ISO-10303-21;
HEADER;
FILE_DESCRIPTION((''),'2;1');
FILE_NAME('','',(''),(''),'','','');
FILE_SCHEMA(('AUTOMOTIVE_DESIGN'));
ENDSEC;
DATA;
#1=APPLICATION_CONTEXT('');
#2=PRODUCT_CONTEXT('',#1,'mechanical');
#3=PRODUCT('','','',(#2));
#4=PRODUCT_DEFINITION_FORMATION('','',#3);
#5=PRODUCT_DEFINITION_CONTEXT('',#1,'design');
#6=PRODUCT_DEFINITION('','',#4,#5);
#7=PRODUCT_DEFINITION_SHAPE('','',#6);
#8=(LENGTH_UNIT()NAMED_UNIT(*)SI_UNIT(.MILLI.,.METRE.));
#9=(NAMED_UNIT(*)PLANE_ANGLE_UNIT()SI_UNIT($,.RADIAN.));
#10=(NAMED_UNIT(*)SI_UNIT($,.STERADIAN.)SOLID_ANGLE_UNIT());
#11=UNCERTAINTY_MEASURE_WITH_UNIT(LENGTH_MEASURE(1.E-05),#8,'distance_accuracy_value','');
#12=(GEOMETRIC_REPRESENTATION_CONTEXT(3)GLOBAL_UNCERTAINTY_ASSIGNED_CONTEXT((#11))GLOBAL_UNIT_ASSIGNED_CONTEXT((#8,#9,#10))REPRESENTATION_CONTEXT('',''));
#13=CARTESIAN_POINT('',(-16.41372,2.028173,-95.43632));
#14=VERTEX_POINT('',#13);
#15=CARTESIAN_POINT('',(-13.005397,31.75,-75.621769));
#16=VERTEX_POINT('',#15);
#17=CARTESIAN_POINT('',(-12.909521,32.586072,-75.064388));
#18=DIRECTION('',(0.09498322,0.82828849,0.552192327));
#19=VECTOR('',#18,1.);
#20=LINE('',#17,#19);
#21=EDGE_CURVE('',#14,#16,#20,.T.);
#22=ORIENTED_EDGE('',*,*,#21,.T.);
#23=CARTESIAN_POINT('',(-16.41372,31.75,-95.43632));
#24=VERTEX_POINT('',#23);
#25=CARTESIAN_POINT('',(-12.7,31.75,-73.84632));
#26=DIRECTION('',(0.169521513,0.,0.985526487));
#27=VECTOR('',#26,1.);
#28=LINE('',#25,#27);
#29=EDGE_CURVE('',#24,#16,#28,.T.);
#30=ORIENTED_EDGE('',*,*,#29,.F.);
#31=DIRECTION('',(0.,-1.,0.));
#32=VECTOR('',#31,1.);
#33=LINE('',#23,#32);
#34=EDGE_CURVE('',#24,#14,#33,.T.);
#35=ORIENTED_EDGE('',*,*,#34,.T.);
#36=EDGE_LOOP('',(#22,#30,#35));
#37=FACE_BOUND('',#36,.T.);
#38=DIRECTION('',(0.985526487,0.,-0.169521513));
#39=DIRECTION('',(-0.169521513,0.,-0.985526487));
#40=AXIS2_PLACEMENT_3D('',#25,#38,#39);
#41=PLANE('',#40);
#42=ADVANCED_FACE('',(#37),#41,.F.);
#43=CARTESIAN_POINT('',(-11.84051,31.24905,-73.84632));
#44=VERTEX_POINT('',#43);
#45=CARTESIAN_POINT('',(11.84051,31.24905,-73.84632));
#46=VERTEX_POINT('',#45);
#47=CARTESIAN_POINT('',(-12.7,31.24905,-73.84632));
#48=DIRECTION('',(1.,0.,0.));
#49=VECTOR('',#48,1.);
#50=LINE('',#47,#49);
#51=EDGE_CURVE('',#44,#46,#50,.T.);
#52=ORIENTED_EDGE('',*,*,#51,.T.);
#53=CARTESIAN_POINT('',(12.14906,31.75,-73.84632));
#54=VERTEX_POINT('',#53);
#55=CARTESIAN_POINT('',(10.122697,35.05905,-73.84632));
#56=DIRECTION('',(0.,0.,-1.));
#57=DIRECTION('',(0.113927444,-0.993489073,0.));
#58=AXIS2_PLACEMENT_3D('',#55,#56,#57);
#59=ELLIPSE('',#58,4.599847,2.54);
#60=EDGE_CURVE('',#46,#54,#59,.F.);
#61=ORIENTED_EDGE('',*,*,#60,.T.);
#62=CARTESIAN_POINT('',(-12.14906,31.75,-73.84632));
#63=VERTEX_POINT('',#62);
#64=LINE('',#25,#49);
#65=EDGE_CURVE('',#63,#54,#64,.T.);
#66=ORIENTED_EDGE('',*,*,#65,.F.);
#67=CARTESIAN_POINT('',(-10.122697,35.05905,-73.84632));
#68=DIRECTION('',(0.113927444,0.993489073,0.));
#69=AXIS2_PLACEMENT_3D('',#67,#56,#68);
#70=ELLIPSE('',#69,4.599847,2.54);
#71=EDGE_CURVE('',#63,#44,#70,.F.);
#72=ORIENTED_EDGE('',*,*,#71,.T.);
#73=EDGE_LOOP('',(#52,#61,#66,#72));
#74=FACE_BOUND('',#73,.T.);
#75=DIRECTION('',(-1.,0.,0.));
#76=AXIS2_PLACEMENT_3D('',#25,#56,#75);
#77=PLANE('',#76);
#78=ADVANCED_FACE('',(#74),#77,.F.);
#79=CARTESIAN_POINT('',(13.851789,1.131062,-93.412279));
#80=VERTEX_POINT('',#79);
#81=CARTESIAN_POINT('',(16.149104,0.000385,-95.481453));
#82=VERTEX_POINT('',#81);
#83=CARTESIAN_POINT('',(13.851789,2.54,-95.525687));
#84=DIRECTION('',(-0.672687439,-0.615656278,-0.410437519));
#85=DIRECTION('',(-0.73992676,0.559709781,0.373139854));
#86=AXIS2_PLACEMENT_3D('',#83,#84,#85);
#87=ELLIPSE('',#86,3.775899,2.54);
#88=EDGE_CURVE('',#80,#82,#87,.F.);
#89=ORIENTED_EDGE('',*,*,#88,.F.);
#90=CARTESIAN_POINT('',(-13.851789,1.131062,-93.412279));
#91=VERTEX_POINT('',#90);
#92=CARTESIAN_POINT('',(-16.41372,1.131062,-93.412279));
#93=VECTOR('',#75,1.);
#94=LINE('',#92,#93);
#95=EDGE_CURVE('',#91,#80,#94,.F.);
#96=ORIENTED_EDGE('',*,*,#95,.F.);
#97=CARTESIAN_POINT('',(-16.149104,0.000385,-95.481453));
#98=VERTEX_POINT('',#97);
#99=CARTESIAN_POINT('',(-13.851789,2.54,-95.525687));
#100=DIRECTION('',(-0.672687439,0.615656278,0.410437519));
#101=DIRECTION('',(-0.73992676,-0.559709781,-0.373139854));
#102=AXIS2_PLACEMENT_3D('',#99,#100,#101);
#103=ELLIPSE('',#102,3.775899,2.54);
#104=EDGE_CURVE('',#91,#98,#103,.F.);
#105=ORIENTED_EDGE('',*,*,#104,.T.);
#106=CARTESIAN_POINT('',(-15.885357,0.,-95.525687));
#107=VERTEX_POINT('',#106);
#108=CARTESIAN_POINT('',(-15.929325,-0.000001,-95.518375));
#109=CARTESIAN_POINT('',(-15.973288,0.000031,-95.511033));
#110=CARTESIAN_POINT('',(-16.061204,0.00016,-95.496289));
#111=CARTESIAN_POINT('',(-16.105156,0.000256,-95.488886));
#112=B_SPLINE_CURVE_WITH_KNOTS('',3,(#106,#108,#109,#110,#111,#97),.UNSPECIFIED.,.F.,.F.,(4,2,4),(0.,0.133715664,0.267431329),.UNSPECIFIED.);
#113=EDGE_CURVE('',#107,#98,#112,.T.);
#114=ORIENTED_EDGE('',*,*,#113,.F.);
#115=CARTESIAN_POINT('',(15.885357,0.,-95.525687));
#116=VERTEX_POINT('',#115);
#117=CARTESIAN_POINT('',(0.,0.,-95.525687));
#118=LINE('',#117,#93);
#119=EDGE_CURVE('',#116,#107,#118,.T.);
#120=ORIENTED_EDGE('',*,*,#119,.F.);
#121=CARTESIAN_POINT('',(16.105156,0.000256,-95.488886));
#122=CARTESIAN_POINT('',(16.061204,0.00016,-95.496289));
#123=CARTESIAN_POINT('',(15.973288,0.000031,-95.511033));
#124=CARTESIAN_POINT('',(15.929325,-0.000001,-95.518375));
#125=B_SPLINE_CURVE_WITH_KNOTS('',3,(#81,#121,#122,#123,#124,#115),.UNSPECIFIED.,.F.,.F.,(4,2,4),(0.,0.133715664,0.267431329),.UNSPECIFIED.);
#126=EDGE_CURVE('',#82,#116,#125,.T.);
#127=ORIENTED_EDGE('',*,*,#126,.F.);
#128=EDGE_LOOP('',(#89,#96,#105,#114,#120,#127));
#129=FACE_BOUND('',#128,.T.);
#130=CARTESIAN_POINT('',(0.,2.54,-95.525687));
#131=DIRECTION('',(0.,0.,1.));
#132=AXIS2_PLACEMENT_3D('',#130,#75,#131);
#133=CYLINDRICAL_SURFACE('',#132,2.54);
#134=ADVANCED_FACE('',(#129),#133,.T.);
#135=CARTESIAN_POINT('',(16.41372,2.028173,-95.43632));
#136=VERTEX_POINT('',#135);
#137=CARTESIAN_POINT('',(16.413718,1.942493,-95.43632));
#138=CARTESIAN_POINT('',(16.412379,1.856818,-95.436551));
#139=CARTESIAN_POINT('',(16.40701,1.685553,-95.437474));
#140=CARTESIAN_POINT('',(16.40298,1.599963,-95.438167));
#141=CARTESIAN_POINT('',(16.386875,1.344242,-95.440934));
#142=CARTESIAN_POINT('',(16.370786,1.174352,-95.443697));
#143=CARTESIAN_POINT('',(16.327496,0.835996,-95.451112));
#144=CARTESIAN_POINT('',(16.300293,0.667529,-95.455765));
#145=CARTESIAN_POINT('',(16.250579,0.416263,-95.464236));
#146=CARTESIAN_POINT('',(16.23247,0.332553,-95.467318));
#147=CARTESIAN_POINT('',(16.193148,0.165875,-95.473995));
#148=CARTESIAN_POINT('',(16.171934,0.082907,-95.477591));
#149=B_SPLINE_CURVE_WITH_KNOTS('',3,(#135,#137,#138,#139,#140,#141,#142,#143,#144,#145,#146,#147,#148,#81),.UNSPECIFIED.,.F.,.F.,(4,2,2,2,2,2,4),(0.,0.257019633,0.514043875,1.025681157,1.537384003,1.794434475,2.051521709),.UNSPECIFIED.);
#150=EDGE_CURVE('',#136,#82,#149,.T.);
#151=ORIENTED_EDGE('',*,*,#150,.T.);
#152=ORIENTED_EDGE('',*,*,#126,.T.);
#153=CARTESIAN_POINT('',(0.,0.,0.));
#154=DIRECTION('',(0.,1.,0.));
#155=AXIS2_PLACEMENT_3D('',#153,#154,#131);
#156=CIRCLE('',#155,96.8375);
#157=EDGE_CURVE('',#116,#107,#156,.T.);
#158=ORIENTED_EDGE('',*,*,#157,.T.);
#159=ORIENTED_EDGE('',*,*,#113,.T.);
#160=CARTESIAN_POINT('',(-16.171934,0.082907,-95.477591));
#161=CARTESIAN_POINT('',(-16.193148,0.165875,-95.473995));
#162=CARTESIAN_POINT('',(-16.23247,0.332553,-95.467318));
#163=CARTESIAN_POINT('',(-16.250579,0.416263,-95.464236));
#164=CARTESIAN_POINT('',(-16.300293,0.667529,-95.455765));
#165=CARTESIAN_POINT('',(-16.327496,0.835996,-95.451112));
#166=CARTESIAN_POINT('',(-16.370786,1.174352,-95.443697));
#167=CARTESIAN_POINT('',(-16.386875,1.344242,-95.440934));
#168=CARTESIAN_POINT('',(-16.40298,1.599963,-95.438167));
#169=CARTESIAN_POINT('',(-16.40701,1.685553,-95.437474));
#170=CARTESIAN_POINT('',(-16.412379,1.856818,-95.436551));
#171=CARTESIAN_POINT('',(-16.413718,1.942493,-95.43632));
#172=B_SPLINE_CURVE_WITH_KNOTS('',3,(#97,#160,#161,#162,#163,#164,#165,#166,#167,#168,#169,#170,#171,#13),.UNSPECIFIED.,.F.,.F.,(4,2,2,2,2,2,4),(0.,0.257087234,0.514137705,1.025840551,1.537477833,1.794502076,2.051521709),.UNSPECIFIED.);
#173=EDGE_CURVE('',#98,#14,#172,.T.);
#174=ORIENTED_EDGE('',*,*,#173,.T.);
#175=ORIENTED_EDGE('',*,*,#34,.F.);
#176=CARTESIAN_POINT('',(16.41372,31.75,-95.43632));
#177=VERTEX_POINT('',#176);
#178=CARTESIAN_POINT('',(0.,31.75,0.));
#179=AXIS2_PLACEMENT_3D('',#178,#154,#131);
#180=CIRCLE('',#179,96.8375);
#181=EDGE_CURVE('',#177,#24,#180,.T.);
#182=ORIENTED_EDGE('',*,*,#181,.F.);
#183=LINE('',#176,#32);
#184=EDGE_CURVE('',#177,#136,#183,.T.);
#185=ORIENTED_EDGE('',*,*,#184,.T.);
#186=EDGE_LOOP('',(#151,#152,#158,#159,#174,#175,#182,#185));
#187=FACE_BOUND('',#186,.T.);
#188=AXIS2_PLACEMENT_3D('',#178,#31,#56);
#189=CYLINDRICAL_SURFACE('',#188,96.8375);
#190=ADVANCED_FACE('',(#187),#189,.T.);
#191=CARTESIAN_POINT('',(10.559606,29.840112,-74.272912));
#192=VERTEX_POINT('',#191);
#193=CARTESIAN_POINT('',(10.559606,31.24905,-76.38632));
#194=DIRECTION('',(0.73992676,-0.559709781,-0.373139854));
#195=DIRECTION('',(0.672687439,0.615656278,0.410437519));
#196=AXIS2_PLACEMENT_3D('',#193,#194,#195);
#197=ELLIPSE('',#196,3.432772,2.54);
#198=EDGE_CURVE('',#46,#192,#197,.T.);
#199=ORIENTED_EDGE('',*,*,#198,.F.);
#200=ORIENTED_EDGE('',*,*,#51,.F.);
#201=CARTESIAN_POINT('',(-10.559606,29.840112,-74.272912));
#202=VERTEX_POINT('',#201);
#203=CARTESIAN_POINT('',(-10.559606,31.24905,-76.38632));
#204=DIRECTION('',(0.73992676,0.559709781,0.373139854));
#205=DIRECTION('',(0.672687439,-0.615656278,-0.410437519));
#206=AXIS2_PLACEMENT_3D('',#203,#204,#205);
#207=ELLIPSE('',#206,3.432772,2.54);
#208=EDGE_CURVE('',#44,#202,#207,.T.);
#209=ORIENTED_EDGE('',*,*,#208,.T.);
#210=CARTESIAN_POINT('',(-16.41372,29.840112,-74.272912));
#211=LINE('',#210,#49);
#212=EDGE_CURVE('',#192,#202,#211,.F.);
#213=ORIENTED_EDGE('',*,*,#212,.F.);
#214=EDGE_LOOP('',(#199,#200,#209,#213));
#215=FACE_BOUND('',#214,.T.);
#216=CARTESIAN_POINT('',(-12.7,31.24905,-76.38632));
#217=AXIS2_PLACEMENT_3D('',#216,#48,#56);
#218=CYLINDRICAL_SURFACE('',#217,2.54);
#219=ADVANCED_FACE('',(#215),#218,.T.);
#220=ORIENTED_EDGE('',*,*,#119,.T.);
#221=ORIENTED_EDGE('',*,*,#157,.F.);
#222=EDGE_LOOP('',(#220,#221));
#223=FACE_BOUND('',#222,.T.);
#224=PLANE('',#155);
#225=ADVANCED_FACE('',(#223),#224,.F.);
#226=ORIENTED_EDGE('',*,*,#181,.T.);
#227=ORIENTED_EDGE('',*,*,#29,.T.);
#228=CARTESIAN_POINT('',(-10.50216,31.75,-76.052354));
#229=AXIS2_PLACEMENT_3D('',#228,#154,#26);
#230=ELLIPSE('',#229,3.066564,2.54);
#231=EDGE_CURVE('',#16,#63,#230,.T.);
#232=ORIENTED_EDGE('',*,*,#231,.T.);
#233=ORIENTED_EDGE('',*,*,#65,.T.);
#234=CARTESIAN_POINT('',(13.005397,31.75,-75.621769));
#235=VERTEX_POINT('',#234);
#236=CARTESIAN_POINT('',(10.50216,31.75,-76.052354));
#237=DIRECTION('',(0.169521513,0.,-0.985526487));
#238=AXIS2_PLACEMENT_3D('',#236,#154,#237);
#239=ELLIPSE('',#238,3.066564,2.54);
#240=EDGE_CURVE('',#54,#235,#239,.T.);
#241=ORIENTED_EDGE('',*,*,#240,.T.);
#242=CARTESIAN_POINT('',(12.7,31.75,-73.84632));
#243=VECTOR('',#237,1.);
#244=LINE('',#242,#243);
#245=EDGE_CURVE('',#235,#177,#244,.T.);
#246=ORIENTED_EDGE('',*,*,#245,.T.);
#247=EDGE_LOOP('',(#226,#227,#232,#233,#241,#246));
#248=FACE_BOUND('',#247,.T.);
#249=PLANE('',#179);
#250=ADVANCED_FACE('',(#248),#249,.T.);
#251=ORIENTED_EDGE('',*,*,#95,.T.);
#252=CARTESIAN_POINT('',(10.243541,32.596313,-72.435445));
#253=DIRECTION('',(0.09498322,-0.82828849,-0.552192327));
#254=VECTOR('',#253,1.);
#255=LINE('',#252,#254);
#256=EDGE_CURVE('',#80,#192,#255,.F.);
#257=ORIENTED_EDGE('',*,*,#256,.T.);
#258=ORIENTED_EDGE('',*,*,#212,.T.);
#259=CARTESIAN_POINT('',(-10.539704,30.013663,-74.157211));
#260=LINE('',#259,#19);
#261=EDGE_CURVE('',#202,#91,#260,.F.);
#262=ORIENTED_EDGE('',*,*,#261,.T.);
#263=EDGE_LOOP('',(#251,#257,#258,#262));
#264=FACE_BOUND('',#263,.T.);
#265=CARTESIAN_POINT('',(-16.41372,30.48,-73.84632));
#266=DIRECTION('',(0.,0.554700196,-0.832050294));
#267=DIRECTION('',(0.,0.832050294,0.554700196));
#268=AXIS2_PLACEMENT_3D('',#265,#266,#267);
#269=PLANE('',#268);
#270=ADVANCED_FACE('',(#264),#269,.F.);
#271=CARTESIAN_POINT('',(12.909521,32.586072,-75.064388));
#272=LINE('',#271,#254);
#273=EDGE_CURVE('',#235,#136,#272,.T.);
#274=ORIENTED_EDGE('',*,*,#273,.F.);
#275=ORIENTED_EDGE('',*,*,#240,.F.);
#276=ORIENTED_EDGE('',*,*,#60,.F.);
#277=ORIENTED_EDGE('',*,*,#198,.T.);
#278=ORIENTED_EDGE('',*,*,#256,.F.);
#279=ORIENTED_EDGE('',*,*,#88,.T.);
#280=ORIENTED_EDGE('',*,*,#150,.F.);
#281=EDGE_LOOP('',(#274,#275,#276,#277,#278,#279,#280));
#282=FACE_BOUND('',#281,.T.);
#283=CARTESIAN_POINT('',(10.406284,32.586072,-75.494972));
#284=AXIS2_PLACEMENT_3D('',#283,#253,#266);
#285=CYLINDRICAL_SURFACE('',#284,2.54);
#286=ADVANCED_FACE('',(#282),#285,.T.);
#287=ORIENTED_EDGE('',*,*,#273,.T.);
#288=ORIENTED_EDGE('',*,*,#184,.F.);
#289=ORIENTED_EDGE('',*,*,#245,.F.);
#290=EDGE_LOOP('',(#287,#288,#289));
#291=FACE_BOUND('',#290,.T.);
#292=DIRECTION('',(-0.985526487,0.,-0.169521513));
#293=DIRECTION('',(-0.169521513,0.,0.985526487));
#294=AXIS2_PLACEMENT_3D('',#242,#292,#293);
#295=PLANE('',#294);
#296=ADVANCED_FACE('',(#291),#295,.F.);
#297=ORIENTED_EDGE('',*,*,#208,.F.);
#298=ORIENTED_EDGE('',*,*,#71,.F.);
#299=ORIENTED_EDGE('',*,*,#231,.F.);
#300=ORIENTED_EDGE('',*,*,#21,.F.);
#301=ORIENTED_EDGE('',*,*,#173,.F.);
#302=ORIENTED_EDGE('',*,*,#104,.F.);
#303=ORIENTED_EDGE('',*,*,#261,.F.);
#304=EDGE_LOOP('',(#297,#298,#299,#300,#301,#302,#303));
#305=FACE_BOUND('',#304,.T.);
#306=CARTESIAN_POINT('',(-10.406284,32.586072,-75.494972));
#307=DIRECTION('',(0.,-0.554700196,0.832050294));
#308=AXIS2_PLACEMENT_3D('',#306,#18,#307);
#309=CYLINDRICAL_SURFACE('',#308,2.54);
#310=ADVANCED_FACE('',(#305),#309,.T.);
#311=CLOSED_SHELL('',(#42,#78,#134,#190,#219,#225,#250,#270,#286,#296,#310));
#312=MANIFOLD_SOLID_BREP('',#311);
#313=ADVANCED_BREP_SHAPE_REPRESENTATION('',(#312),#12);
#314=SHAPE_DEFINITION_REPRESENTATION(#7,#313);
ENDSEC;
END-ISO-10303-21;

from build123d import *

# Parameters (mm, degrees)
BOSS_EXTRUDE1_DEPTH     = 31.75
CUT_EXTRUDE1_DEPTH      = 104.222934041
CUT_EXTRUDE1_DEPTH_BACK = 104.222934041
FILLET1_R               = 2.54


with BuildPart() as part:
    # Sketch1 → Boss-Extrude1 (new body)
    with BuildSketch(Plane(origin=(0, 0, 0), x_dir=(1, 0, 0), z_dir=(0, 1, 0))):
        with BuildLine():
            Line((-12.7, 73.846320133), (12.7, 73.846320133))
            Line((12.7, 73.846320133), (16.413720047, 95.436320133))
            ThreePointArc((16.413720047, 95.436320133), (0, 96.8375), (-16.413720047, 95.436320133))
            Line((-16.413720047, 95.436320133), (-12.7, 73.846320133))
        make_face()
    extrude(amount=BOSS_EXTRUDE1_DEPTH)

    # Sketch2 → Cut-Extrude1 (cut, two sides: drawn at the far end of the back side and taken through both)
    with BuildSketch(Plane(origin=(0, 0, 0), x_dir=(0, 0, -1), z_dir=(1, 0, 0)).offset(-CUT_EXTRUDE1_DEPTH_BACK)):
        Polygon((73.846320133, 30.48), (94.166320133, 0), (73.846320133, 0), align=None)
    extrude(amount=CUT_EXTRUDE1_DEPTH + CUT_EXTRUDE1_DEPTH_BACK, mode=Mode.SUBTRACT)

    # Fillet1
    # the kernel refuses this fillet: 2.54 mm, written as the material it takes off along each edge
    with BuildSketch(Plane(origin=(12.176698441, 35.043381397, -70.804065868), x_dir=(-0.9954788736987198, -0.07903081588642236, -0.05268721059094609), z_dir=(0.09498321967341544, -0.8282884898681249, -0.5521923265787502))) as fillet1_piece_1:
        with BuildLine():
            CenterArc((FILLET1_R * 0.867623718674, FILLET1_R), FILLET1_R, 188.108634364, 81.891365636)
            Line((-FILLET1_R * 0.122378694256, FILLET1_R * 0.858949575003), (0, 0))
            Line((0, 0), (FILLET1_R * 0.867623718674, 0))
        make_face()
    extrude(amount=47.817594086, mode=Mode.SUBTRACT)
    with BuildSketch(Plane(origin=(-16.718567485, -4.563381397, -97.208574398), x_dir=(-0.14041271821062315, 0.5603018628846251, -0.8163002456282387), z_dir=(0.09498321967341593, 0.8282884898681249, 0.5521923265787501))) as fillet1_piece_2:
        with BuildLine():
            CenterArc((FILLET1_R * 0.867623718674, -FILLET1_R), FILLET1_R, 90, 81.891365636)
            Line((-FILLET1_R * 0.122378694256, -FILLET1_R * 0.858949575003), (0, 0))
            Line((0, 0), (FILLET1_R * 0.867623718674, 0))
        make_face()
    extrude(amount=47.817594086, mode=Mode.SUBTRACT)
    with BuildSketch(Plane(origin=(19.593682793, 0, -94.166320133), x_dir=(0, 0, -1), z_dir=(-1, 0, 0))) as fillet1_piece_3:
        with BuildLine():
            CenterArc((FILLET1_R * 0.535183758488, -FILLET1_R), FILLET1_R, 90, 56.309932474)
            Line((-FILLET1_R * 0.29686653585, -FILLET1_R * 0.445299803775), (0, 0))
            Line((0, 0), (FILLET1_R * 0.535183758488, 0))
        make_face()
    extrude(amount=39.187365585, mode=Mode.SUBTRACT)
    with BuildSketch(Plane(origin=(-14.6226253, 30.48, -73.846320133), x_dir=(0, -0.8320502943378437, -0.5547001962252291), z_dir=(1, 0, 0))) as fillet1_piece_4:
        with BuildLine():
            CenterArc((FILLET1_R * 0.302775637732, FILLET1_R), FILLET1_R, 236.309932474, 33.690067526)
            Line((-FILLET1_R * 0.251924558493, FILLET1_R * 0.167949705662), (0, 0))
            Line((0, 0), (FILLET1_R * 0.302775637732, 0))
        make_face()
    extrude(amount=29.245250599, mode=Mode.SUBTRACT)


solid = part.part
